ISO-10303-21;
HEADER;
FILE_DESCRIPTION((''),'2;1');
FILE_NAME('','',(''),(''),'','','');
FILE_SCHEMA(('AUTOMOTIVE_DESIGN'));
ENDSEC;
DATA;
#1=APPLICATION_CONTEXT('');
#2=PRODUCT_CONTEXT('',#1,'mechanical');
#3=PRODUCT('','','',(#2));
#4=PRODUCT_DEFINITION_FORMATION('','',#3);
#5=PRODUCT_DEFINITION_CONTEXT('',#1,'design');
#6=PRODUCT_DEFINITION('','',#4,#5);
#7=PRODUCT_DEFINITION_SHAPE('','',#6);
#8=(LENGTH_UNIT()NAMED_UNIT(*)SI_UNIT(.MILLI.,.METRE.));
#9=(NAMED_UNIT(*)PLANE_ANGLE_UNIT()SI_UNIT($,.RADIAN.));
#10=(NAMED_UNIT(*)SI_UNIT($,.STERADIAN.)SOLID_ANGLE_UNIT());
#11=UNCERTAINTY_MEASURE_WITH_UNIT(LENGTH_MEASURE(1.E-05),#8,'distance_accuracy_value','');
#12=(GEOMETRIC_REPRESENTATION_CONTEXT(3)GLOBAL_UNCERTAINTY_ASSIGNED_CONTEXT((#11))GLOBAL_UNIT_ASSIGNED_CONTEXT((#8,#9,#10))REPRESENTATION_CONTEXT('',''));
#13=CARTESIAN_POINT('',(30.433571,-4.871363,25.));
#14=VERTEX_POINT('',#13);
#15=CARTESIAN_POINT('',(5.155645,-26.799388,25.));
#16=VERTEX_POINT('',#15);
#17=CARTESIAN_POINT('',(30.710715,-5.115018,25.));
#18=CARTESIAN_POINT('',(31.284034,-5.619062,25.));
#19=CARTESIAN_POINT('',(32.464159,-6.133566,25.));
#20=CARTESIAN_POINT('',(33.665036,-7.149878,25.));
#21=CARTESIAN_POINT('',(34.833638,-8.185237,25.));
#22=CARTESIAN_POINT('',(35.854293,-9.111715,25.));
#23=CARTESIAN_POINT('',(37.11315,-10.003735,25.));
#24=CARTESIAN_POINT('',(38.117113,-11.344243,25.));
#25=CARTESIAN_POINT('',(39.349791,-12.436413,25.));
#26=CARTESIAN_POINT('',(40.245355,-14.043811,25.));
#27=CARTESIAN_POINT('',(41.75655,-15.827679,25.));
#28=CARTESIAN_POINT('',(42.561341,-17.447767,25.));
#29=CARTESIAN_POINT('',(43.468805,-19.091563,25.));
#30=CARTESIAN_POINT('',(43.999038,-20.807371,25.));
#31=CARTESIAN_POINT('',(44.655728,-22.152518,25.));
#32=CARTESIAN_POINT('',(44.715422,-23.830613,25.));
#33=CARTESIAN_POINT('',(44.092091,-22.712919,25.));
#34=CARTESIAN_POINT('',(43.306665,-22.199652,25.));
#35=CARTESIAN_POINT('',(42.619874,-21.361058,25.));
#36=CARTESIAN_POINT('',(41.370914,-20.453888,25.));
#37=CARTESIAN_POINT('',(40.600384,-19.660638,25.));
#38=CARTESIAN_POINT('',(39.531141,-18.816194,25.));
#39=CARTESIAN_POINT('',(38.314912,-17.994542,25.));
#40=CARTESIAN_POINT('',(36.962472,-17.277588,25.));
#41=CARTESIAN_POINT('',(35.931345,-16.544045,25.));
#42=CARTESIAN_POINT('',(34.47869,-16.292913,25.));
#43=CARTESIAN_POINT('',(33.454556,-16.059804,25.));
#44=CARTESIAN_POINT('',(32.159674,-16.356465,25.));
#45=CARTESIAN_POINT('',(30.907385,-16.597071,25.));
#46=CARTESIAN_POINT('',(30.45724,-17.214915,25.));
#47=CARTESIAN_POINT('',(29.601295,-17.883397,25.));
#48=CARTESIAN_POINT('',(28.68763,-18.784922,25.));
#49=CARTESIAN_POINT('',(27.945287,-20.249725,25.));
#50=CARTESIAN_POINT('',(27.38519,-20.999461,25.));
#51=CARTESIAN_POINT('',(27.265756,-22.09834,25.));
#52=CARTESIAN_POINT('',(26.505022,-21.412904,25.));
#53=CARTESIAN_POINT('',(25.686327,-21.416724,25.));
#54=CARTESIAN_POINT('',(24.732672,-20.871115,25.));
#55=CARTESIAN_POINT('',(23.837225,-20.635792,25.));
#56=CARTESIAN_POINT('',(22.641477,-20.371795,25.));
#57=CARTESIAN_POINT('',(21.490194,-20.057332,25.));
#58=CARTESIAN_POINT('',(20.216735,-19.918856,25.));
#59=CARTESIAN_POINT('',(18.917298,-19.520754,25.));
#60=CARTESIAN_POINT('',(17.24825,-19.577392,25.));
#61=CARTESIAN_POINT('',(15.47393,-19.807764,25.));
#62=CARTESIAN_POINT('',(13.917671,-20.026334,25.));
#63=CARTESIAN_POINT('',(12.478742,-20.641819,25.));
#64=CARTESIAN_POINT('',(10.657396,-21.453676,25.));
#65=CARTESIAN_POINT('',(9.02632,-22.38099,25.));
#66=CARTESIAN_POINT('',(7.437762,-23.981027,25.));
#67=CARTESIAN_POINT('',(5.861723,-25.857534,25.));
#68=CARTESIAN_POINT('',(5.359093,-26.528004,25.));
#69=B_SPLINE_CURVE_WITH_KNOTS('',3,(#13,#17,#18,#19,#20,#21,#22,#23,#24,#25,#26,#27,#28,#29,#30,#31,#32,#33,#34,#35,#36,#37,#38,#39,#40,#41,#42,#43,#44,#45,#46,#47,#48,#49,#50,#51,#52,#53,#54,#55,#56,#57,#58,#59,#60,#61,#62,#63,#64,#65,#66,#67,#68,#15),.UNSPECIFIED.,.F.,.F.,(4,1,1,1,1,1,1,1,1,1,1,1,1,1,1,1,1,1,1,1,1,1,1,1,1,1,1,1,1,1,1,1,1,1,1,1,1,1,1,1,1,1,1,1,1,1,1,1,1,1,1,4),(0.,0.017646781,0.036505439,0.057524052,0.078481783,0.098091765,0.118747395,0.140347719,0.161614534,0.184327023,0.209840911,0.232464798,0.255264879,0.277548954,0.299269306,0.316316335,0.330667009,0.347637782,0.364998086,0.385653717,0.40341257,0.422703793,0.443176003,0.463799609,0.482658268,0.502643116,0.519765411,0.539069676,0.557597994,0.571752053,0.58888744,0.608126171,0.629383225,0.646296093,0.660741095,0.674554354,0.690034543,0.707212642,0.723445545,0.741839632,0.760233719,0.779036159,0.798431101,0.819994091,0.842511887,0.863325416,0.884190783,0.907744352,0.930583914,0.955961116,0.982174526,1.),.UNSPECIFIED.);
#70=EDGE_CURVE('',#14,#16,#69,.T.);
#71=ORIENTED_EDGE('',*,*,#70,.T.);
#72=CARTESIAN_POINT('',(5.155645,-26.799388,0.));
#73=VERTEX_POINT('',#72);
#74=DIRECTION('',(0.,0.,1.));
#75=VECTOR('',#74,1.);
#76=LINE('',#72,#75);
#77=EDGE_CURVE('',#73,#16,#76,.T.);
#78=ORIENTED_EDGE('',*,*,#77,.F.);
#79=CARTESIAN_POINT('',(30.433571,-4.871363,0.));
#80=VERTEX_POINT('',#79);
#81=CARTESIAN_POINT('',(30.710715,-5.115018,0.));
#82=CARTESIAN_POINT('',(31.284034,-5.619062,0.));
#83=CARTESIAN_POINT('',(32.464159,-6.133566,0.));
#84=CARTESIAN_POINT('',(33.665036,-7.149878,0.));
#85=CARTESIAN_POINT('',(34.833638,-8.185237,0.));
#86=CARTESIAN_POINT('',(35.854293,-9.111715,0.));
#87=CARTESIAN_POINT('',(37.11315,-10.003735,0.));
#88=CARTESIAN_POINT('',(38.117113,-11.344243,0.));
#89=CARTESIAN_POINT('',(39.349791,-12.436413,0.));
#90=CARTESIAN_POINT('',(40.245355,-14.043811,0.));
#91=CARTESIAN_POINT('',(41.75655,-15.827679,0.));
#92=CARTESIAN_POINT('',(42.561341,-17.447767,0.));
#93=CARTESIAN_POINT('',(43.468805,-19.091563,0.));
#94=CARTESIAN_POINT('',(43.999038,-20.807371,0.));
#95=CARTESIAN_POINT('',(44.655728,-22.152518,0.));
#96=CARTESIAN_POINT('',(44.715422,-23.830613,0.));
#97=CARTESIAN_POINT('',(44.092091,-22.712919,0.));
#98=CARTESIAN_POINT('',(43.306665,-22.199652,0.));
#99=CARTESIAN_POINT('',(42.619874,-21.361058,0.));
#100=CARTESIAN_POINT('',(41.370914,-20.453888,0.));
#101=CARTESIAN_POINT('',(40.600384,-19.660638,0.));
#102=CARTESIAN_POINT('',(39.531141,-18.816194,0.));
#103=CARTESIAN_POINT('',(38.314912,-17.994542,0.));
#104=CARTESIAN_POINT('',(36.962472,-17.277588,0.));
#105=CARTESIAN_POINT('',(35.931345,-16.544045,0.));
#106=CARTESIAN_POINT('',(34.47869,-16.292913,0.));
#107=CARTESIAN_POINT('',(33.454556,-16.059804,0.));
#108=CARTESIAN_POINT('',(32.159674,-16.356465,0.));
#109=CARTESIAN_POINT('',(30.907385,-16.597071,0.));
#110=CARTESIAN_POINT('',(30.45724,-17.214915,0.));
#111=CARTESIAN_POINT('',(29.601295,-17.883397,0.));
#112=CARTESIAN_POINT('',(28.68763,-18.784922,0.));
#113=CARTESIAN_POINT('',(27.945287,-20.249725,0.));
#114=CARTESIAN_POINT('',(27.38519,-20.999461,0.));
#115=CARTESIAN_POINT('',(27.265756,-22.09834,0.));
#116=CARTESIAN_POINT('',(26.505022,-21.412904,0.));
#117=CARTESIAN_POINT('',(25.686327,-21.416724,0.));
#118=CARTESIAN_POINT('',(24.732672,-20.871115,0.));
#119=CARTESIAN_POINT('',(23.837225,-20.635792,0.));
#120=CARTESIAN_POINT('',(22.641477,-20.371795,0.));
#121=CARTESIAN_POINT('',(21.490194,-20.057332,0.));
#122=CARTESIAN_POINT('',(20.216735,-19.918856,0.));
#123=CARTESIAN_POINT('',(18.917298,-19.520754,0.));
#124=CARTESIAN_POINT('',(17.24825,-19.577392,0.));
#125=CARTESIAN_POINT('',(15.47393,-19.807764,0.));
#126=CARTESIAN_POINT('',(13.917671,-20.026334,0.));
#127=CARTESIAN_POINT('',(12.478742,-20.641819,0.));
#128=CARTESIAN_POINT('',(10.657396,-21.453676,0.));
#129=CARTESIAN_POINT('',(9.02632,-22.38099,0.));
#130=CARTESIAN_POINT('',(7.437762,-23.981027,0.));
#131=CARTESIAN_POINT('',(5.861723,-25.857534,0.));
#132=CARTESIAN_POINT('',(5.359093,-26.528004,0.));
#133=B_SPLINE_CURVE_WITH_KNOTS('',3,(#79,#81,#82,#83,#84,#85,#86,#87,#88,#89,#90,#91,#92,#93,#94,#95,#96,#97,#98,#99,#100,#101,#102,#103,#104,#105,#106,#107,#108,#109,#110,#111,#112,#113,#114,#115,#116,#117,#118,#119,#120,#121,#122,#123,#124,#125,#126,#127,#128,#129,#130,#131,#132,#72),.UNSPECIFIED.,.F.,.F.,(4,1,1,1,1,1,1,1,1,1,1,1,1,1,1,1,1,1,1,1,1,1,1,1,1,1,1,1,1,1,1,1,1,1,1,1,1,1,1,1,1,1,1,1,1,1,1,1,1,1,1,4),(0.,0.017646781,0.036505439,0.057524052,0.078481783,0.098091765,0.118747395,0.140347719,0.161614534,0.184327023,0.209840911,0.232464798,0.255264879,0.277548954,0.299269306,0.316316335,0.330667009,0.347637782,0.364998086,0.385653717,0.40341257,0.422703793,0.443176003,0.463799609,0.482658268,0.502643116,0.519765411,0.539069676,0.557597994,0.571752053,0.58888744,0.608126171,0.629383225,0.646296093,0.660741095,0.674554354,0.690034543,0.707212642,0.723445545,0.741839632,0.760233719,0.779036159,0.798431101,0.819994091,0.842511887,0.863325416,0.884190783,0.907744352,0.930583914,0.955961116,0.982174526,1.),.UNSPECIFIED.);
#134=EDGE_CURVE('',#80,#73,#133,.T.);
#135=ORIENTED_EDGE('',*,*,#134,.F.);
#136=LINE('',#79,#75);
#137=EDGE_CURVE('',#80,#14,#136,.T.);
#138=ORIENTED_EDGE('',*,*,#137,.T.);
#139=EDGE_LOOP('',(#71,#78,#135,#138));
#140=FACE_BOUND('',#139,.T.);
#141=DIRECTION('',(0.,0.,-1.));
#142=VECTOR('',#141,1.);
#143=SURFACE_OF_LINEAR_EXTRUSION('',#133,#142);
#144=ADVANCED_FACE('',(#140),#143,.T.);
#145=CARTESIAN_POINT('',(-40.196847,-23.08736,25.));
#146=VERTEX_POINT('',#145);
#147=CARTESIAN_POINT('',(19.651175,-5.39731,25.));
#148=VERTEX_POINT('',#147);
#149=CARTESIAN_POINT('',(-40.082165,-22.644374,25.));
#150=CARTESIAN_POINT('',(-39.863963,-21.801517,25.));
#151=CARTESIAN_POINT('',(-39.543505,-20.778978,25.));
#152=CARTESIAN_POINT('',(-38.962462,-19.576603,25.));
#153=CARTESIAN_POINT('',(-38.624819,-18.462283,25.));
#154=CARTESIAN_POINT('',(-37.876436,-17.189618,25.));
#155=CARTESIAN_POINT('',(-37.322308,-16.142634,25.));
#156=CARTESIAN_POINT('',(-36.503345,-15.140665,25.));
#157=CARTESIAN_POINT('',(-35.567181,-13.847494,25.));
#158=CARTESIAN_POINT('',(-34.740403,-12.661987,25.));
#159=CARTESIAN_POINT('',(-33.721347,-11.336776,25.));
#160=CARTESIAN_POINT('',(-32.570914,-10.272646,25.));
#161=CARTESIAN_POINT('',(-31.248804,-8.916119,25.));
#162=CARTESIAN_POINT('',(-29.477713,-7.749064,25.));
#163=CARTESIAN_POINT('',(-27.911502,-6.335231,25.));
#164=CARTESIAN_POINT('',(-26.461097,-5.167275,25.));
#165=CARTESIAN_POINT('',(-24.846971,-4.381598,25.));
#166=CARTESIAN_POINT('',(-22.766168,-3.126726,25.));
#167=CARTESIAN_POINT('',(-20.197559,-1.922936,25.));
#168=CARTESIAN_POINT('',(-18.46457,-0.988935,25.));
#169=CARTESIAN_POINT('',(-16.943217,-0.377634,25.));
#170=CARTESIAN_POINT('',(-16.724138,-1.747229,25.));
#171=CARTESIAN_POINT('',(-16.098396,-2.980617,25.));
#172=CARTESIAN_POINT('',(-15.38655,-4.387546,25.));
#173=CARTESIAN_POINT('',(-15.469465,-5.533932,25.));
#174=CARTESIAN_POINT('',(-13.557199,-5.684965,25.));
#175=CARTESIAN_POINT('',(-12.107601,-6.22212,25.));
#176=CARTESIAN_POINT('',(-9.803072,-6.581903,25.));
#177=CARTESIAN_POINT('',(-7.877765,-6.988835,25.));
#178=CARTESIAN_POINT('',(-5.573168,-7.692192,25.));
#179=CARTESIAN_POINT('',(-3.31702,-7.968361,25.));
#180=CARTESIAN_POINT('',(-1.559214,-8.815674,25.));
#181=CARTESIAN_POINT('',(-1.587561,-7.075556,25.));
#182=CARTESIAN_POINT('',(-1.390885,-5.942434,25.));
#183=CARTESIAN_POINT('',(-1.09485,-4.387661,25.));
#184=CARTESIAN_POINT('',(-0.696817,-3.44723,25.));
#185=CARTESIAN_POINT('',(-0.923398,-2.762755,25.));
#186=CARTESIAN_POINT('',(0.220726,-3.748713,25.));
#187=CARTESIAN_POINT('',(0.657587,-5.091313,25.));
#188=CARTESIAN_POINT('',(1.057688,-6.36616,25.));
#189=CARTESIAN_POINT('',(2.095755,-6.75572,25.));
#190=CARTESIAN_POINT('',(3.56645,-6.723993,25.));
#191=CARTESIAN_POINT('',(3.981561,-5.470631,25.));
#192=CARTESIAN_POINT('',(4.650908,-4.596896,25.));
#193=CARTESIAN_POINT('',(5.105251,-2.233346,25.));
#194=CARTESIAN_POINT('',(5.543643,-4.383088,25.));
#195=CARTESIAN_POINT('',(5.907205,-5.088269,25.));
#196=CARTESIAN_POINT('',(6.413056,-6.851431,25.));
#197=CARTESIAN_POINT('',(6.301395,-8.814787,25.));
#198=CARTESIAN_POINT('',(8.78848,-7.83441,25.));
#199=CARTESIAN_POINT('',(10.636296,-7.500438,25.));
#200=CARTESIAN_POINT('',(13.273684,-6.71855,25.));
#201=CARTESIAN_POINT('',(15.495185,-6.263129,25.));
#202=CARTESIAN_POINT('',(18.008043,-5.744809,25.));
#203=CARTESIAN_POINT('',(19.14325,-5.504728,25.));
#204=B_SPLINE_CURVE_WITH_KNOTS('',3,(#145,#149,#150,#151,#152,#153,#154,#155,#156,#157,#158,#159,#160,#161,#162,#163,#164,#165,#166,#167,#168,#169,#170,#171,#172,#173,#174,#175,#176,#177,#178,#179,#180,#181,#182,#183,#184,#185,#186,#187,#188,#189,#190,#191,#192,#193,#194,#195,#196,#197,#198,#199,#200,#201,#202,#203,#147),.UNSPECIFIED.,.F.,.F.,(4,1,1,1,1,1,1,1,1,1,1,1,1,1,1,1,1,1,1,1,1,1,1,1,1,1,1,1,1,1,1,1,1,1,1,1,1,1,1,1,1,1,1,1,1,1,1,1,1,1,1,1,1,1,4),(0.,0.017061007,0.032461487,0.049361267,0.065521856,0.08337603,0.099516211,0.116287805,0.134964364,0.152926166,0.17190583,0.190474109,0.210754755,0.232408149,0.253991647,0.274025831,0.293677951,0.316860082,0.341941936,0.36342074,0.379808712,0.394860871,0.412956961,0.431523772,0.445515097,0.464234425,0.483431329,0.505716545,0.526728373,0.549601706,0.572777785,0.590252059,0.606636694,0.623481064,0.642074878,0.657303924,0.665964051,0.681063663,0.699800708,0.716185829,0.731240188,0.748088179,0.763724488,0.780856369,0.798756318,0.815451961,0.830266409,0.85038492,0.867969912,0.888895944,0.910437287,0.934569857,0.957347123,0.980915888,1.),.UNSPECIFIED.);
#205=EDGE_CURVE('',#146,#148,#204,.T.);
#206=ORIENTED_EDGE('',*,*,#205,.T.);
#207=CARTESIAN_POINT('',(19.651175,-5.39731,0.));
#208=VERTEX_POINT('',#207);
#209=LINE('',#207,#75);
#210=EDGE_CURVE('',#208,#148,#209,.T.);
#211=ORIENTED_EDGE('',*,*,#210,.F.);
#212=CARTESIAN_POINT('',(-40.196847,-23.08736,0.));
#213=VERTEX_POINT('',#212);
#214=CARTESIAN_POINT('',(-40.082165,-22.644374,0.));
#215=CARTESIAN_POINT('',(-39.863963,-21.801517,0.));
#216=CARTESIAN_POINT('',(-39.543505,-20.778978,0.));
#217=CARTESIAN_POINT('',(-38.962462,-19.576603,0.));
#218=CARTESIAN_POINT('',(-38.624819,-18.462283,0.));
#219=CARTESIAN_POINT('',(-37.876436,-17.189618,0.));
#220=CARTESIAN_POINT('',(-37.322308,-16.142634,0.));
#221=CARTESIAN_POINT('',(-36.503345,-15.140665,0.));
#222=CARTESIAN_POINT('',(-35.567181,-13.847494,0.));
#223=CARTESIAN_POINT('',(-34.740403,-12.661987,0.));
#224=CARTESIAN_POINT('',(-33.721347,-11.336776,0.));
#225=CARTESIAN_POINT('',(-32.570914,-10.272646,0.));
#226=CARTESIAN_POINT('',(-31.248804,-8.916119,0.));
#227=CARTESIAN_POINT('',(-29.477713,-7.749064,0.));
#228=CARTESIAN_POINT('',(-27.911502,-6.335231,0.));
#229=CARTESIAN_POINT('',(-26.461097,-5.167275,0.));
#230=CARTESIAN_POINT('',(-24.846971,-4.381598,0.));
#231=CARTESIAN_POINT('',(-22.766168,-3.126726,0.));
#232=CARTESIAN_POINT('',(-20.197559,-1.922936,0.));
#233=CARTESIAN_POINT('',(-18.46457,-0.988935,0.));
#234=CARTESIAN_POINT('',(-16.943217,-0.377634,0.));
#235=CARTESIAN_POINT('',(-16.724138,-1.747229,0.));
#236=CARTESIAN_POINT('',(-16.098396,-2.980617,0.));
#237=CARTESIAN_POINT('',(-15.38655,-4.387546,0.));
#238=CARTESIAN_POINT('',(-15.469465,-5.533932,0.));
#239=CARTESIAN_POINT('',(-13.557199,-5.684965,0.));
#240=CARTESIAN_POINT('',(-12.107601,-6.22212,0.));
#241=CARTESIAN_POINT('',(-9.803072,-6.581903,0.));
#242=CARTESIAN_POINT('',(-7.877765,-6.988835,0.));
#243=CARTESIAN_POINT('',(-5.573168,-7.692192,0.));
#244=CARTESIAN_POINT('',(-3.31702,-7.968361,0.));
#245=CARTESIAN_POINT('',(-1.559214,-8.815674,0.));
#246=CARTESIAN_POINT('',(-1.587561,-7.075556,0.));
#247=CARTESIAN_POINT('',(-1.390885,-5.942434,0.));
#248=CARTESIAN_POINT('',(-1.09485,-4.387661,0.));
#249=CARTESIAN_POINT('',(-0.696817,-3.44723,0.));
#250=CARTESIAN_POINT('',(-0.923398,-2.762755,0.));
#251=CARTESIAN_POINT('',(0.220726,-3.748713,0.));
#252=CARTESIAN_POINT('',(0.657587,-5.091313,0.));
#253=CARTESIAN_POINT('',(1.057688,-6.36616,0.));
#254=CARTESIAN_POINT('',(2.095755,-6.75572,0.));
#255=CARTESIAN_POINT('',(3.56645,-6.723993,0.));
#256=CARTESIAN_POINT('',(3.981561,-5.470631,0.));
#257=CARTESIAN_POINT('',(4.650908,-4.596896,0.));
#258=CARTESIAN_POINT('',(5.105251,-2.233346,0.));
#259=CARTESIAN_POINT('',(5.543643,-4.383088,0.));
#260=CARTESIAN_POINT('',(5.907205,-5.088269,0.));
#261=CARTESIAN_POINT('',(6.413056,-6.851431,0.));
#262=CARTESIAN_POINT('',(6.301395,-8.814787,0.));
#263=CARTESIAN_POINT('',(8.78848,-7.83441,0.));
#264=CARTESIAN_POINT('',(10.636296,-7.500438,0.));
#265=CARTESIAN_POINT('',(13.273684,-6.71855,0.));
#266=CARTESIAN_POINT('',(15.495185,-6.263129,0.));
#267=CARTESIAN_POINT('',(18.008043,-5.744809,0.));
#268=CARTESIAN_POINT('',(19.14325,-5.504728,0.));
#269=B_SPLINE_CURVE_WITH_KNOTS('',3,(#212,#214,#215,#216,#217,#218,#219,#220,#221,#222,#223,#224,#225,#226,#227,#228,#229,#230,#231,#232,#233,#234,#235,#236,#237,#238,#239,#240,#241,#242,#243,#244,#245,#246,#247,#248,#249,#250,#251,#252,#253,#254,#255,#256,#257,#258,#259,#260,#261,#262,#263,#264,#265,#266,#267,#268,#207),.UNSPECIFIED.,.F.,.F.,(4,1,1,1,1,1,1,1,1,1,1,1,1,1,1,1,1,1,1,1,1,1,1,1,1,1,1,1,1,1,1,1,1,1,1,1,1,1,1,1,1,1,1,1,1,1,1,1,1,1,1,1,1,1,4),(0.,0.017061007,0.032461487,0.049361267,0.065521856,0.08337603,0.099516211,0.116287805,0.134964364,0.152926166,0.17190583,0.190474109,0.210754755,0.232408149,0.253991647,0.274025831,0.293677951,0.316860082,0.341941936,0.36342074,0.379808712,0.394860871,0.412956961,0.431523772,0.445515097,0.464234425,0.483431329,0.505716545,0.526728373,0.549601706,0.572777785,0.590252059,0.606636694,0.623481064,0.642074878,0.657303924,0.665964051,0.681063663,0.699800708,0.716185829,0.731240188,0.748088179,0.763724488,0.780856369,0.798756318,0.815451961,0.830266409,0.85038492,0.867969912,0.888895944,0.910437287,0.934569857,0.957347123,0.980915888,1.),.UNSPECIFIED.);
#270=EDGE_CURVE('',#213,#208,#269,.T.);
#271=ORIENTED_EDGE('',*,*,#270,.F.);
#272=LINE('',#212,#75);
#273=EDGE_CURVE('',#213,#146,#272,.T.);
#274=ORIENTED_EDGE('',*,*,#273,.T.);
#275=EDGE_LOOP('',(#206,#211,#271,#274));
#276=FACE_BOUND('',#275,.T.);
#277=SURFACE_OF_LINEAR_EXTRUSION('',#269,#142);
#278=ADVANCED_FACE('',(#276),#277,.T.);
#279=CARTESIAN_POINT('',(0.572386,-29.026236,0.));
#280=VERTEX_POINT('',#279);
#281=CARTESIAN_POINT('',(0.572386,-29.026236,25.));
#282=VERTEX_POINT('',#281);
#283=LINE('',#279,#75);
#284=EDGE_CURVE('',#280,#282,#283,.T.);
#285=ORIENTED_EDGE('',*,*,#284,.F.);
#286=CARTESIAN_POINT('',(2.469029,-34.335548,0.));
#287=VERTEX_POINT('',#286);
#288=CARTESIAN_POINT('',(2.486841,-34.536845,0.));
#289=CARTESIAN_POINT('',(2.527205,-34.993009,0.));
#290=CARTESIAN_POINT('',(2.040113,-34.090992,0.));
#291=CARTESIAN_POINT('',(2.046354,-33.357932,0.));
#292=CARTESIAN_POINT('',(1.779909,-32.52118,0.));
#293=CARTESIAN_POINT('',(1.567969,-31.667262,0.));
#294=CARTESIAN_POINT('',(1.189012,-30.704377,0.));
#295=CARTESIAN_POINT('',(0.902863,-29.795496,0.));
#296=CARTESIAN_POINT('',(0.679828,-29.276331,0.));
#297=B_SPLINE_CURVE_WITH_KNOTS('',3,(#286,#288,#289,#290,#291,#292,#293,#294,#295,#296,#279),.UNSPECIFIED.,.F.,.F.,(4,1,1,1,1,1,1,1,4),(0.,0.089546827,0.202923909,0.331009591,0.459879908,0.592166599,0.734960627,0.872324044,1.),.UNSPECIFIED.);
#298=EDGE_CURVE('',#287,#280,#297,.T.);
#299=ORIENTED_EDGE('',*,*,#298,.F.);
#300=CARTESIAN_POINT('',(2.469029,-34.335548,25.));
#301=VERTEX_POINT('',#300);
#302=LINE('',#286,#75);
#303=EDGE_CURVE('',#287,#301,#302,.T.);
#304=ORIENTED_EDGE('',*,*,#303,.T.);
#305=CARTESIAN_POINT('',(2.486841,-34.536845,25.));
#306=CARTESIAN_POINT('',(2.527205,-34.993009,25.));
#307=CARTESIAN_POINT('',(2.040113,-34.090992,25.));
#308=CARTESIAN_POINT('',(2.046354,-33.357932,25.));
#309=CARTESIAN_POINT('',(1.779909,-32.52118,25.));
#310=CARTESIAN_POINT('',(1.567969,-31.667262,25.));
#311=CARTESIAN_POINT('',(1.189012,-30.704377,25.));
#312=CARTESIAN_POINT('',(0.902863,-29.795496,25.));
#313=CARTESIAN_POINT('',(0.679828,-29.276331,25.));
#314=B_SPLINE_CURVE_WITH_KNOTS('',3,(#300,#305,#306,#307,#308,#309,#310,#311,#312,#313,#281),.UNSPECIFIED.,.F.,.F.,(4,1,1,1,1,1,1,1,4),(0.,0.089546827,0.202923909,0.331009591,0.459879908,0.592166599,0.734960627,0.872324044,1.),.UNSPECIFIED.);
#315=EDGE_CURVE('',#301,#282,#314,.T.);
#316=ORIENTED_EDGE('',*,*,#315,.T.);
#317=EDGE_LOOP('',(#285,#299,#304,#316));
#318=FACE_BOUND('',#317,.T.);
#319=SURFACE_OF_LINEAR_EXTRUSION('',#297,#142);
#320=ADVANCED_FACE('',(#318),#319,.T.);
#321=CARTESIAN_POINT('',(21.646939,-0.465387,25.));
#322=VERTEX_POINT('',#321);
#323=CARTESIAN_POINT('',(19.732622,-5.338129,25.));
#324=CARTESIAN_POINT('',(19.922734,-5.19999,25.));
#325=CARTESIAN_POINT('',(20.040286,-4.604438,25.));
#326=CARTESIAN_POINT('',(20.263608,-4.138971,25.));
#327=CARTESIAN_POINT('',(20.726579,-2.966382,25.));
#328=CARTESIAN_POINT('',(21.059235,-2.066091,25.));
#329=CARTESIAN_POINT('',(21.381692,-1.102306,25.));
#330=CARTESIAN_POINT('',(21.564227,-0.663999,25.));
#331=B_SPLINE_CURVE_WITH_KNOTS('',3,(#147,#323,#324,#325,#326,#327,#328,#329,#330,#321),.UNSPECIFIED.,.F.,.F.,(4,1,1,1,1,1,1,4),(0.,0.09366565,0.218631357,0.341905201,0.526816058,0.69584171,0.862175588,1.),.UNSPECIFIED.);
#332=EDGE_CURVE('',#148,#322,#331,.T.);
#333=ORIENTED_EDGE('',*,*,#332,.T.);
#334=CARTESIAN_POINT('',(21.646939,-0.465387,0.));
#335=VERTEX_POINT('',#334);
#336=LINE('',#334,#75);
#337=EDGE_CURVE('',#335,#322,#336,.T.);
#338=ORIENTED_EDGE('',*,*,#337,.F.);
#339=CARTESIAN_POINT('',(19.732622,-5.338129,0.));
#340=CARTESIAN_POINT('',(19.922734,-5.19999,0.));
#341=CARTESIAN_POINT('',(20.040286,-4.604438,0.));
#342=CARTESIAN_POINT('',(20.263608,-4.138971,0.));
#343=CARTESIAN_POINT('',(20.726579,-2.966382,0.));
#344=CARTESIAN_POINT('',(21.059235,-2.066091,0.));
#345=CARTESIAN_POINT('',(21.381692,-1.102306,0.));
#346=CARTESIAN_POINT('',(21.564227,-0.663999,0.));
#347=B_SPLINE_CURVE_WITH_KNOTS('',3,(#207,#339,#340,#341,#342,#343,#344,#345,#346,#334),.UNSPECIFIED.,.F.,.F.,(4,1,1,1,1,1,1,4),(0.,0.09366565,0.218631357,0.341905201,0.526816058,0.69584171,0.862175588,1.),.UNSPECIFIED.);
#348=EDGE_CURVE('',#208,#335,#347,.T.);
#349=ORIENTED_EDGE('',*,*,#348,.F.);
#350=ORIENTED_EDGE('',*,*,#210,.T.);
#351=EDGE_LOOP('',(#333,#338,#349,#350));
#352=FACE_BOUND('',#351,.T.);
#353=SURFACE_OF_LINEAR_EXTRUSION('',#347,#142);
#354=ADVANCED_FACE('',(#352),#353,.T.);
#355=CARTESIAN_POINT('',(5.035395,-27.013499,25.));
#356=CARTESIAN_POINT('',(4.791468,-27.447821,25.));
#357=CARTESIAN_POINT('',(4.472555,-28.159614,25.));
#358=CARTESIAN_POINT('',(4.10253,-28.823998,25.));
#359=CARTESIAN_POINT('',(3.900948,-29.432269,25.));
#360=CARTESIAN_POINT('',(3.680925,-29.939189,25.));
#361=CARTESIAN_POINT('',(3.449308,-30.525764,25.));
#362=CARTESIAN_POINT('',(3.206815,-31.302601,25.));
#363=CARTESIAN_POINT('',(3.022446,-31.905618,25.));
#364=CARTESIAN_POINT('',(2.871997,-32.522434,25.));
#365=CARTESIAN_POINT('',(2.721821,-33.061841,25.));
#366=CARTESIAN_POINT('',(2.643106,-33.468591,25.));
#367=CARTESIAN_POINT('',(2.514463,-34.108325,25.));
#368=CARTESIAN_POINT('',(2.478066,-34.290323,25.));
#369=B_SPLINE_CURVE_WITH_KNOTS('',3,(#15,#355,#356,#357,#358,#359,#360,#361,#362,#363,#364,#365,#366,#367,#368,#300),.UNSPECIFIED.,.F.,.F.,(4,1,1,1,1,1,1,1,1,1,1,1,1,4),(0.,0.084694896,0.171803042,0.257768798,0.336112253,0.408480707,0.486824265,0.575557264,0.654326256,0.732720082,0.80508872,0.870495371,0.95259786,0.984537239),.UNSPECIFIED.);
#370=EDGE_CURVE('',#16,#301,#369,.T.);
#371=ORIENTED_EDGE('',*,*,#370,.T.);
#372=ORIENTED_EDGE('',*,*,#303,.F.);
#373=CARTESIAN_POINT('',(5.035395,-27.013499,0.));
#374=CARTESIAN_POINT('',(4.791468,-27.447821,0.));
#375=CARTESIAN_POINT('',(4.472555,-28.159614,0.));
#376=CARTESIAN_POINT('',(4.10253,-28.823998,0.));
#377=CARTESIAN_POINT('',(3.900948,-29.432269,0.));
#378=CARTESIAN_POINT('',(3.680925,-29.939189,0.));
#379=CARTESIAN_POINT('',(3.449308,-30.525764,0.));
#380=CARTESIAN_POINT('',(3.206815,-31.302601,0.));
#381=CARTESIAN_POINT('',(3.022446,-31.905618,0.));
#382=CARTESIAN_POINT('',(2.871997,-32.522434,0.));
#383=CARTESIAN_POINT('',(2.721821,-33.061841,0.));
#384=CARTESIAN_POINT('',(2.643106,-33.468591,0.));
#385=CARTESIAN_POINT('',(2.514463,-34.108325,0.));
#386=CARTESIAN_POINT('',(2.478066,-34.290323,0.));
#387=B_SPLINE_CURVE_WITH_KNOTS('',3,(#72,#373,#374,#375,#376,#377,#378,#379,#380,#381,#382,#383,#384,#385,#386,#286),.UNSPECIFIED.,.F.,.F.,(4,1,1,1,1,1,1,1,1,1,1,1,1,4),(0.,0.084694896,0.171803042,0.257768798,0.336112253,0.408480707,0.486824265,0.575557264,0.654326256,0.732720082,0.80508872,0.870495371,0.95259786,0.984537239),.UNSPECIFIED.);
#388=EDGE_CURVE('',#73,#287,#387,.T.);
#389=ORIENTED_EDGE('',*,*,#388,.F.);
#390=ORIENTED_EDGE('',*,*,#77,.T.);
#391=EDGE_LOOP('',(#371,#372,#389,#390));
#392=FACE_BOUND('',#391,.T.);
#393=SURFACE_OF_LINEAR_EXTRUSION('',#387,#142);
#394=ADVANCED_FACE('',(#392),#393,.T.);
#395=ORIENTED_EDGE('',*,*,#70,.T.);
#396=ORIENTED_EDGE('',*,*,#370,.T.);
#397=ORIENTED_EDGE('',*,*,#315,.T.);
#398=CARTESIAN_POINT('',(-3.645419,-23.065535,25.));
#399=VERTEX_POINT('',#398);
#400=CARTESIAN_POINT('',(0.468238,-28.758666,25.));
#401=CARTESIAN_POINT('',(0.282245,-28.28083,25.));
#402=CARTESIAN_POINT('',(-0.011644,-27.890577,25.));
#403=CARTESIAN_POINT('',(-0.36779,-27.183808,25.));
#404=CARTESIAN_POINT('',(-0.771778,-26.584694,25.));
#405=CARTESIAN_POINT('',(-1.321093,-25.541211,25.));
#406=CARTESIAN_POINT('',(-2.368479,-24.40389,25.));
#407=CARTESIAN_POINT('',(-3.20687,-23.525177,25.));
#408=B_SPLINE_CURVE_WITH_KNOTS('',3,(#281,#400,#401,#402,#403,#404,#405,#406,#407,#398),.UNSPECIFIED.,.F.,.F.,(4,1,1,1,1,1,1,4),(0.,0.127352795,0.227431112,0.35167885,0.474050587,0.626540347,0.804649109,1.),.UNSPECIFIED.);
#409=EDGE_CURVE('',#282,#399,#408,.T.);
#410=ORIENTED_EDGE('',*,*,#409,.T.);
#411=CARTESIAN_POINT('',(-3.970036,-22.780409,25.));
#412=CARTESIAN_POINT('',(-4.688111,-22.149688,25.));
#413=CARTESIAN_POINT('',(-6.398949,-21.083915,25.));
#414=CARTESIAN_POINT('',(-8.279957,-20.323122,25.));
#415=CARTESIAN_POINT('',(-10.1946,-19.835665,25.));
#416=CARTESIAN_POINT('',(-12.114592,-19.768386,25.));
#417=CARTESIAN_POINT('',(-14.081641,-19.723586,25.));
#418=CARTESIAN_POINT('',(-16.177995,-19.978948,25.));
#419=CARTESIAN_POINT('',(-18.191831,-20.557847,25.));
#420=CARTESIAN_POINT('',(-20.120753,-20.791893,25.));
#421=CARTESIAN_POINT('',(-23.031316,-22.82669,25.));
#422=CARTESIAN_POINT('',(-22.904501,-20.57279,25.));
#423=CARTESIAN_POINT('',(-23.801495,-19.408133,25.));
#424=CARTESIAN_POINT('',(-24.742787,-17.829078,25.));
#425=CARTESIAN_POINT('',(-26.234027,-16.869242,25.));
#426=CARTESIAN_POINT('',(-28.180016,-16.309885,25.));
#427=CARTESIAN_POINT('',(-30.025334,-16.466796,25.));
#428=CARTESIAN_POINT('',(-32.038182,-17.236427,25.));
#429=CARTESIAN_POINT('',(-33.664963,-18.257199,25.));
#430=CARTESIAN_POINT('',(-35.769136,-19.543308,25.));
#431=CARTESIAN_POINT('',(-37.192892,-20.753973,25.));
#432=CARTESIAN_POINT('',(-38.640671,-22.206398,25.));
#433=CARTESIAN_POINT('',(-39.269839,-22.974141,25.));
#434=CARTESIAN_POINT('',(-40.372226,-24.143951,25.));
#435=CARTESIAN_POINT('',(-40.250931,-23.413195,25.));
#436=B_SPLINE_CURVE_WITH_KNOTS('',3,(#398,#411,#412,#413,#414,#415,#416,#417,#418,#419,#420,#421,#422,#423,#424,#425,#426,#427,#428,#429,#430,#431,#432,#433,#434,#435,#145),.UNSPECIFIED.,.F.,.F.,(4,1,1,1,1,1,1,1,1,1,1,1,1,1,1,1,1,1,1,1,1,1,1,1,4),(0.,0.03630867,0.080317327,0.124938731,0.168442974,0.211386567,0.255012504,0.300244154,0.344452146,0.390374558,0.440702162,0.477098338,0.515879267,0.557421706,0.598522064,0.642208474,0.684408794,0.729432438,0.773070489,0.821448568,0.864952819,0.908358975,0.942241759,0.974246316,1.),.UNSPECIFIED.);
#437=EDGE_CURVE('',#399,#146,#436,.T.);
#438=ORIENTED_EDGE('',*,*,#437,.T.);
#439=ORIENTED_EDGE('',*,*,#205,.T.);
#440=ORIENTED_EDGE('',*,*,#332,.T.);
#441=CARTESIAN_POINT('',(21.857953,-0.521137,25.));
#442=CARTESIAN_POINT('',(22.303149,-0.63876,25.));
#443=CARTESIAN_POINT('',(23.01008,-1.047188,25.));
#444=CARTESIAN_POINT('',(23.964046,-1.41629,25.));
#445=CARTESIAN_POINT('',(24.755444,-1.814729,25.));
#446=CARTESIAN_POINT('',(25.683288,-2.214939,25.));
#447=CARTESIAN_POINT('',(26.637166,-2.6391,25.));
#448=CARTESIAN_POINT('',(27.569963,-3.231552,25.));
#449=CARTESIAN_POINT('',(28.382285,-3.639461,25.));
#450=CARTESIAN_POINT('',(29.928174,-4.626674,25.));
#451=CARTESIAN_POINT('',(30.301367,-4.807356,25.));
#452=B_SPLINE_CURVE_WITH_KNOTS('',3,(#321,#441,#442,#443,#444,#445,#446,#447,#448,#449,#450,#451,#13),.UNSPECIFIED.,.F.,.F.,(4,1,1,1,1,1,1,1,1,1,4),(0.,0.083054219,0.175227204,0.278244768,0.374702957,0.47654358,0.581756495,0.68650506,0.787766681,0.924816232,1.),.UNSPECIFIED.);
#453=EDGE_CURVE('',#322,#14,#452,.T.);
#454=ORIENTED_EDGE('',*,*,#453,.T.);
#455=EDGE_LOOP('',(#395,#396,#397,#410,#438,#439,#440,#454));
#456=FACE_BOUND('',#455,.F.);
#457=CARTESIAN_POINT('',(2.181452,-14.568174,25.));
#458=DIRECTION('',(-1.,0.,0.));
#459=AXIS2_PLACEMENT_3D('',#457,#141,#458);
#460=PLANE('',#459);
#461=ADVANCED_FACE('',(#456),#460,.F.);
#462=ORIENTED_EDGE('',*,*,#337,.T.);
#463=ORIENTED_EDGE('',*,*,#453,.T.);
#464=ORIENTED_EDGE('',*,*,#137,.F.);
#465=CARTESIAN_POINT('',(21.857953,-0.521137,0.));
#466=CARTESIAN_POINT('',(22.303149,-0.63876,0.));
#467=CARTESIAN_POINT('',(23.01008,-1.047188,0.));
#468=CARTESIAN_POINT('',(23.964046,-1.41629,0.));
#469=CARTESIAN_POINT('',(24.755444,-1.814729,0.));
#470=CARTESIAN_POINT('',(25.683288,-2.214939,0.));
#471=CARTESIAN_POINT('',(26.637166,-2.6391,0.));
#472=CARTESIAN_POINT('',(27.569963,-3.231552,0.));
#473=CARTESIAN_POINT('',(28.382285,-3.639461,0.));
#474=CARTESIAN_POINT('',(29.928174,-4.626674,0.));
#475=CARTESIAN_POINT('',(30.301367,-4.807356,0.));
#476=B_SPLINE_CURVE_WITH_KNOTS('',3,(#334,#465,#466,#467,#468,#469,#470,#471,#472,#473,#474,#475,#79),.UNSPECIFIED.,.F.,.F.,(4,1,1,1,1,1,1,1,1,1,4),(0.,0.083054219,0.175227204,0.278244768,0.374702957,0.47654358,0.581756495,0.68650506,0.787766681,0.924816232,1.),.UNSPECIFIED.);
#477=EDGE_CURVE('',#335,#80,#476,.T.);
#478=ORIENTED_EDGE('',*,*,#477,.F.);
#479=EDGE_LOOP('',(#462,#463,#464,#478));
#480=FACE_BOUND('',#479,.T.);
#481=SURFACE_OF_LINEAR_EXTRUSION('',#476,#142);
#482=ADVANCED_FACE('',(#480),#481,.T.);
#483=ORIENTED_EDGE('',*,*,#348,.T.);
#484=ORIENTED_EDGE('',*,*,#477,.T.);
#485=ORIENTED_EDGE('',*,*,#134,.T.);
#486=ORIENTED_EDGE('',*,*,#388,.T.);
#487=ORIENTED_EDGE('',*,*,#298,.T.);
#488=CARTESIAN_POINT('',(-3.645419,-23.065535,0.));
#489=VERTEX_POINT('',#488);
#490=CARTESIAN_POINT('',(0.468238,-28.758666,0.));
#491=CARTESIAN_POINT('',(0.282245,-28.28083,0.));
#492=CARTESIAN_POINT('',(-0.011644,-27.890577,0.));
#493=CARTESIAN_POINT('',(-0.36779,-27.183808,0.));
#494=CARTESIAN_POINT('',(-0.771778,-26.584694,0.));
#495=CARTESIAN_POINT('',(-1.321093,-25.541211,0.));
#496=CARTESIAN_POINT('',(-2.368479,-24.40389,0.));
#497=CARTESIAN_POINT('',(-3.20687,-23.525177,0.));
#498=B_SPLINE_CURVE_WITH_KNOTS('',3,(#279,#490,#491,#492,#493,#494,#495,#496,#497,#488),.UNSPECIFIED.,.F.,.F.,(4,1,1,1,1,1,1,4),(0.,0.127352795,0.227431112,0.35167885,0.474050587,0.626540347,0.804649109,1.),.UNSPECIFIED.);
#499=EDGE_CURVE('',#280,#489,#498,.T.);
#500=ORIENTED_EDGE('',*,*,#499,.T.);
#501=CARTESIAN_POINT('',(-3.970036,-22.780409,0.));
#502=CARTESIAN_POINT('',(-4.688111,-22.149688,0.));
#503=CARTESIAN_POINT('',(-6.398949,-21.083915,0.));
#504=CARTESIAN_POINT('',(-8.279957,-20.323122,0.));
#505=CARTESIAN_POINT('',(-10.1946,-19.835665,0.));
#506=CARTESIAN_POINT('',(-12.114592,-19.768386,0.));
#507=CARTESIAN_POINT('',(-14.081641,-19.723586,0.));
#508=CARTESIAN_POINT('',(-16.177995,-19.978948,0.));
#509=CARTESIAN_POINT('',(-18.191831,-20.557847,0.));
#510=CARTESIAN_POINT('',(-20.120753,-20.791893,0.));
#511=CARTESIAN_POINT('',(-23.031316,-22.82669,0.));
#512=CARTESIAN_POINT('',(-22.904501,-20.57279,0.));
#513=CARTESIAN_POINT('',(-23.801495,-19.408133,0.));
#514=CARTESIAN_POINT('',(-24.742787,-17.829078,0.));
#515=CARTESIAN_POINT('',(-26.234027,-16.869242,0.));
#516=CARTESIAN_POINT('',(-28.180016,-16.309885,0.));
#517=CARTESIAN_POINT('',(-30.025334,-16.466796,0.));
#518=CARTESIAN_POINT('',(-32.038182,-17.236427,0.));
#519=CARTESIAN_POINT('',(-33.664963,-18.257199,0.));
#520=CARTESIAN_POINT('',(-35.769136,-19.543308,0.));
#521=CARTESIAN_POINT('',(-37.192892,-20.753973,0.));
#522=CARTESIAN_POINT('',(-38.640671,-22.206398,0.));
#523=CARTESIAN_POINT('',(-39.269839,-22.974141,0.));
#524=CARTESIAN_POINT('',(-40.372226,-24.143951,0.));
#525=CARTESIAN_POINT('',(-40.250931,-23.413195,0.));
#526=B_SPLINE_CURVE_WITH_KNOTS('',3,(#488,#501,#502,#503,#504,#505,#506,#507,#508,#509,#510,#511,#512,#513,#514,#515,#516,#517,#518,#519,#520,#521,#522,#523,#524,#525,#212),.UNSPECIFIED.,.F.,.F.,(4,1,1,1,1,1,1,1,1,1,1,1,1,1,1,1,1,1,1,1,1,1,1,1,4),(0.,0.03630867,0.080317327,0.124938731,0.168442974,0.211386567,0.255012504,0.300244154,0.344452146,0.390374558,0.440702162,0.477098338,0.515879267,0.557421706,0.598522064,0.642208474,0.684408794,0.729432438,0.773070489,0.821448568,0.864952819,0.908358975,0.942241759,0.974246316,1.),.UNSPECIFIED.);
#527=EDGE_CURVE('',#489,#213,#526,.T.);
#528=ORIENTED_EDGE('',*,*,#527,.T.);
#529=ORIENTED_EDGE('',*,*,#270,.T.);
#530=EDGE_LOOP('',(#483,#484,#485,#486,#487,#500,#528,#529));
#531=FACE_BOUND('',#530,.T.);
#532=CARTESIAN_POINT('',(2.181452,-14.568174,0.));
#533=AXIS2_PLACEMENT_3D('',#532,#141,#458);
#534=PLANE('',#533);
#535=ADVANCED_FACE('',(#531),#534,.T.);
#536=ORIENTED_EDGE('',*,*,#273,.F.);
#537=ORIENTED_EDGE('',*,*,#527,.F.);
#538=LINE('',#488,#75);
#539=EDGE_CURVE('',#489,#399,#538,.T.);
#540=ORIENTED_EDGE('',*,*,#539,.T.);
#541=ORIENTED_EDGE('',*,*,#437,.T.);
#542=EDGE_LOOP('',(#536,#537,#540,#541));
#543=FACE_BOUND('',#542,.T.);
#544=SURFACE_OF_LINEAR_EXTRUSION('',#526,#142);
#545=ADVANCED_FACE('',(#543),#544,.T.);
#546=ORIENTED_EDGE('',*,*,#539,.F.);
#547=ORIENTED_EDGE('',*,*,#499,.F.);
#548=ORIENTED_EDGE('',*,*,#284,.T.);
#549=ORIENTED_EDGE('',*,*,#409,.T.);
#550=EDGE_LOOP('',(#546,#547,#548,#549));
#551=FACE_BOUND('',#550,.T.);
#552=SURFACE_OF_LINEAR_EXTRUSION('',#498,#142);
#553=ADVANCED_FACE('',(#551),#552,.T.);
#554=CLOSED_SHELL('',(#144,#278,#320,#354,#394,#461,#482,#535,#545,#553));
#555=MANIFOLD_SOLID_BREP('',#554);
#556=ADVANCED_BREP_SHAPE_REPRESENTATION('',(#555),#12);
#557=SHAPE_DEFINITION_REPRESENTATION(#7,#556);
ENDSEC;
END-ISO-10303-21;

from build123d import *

# Parameters (mm, degrees)
F1_DEPTH = 25


# Not quite as in the source:
# - ends of sketch curves that miss each other by under 0.0002 mm in the source are joined


with BuildPart() as f1:
    # F0 (on Top) → F1 (new body)
    with BuildSketch(Plane.XY):
        with BuildLine():
            add(Edge.make_bspline(
                [(-40.1968471706, -23.0873599648), (-40.0821652579, -22.6443739225), (-39.8639632828, -21.8015171271), (-39.5435051275, -20.7789783314), (-38.9624616028, -19.5766025839), (-38.6248192553, -18.4622828305), (-37.8764356227, -17.1896178035), (-37.3223083399, -16.1426343346), (-36.5033448154, -15.1406645327), (-35.5671807336, -13.8474938719), (-34.7404028099, -12.6619867692), (-33.7213474012, -11.3367760015), (-32.5709136851, -10.2726462551), (-31.2488039384, -8.9161188537), (-29.477712685, -7.7490635161), (-27.9115017025, -6.3352311912), (-26.4610965168, -5.1672752357), (-24.8469714717, -4.3815980141), (-22.76616761, -3.1267258394), (-20.197558566, -1.922936453), (-18.4645703482, -0.9889353135), (-16.9432166525, -0.3776336266), (-16.7241377526, -1.7472285966), (-16.0983957866, -2.98061749), (-15.3865504555, -4.3875457176), (-15.4694646208, -5.5339323373), (-13.5571991944, -5.6849648844), (-12.1076010518, -6.2221198071), (-9.8030724141, -6.5819033007), (-7.8777646095, -6.9888346023), (-5.5731675689, -7.6921919678), (-3.3170197485, -7.9683608609), (-1.5592142712, -8.8156744244), (-1.5875609412, -7.0755561172), (-1.3908853453, -5.9424344394), (-1.0948496289, -4.3876609047), (-0.696817184, -3.4472296341), (-0.9233984107, -2.7627548299), (0.2207261996, -3.7487128755), (0.6575865872, -5.0913132804), (1.05768838, -6.3661599967), (2.0957548088, -6.7557202463), (3.5664498521, -6.7239926634), (3.9815612421, -5.4706314467), (4.6509078444, -4.5968960366), (5.105251181, -2.2333464779), (5.5436434557, -4.3830876586), (5.9072053976, -5.0882691082), (6.4130563138, -6.8514311697), (6.3013952004, -8.8147866429), (8.7884804661, -7.8344097925), (10.6362955306, -7.500438229), (13.2736835098, -6.718549896), (15.4951850723, -6.2631292249), (18.0080425407, -5.7448091068), (19.1432502742, -5.5047284656), (19.6511745453, -5.3973095492)],
                knots=[0, 0, 0, 0, 0.0170610068, 0.0324614868, 0.0493612671, 0.0655218559, 0.0833760304, 0.0995162111, 0.1162878049, 0.1349643643, 0.1529261659, 0.1719058297, 0.1904741087, 0.2107547548, 0.2324081495, 0.253991647, 0.2740258308, 0.2936779511, 0.3168600822, 0.3419419356, 0.3634207404, 0.3798087119, 0.3948608713, 0.4129569613, 0.4315237718, 0.4455150974, 0.4642344254, 0.4834313288, 0.5057165451, 0.526728373, 0.549601706, 0.5727777848, 0.5902520588, 0.606636694, 0.6234810643, 0.6420748776, 0.6573039245, 0.6659640514, 0.6810636629, 0.6998007085, 0.7161858288, 0.7312401883, 0.748088179, 0.7637244879, 0.7808563694, 0.7987563178, 0.8154519605, 0.8302664091, 0.8503849202, 0.8679699115, 0.8888959441, 0.9104372868, 0.9345698574, 0.9573471235, 0.9809158883, 1, 1, 1, 1], degree=3))
            add(Edge.make_bspline(
                [(-3.6454189103, -23.0655353516), (-3.9700357905, -22.7804086809), (-4.688111127, -22.1496884611), (-6.3989491613, -21.0839150655), (-8.2799567849, -20.3231216792), (-10.1946000306, -19.8356650727), (-12.1145921887, -19.7683859316), (-14.0816405812, -19.7235863275), (-16.1779945431, -19.9789483234), (-18.1918308983, -20.5578474853), (-20.1207526826, -20.7918932665), (-23.0313163117, -22.8266895653), (-22.9045006793, -20.5727904096), (-23.8014948384, -19.4081332415), (-24.7427870508, -17.8290780293), (-26.234027042, -16.8692420735), (-28.1800156141, -16.3098850154), (-30.0253338558, -16.466795709), (-32.0381815128, -17.2364274948), (-33.6649628124, -18.2571987271), (-35.7691363818, -19.5433076538), (-37.192892414, -20.7539734971), (-38.6406714979, -22.2063984812), (-39.2698386612, -22.9741411763), (-40.3722264802, -24.143950946), (-40.2509312224, -23.4131949876), (-40.1968471706, -23.0873599648)],
                knots=[0, 0, 0, 0, 0.0363086698, 0.0803173275, 0.1249387314, 0.1684429741, 0.2113865674, 0.2550125042, 0.3002441538, 0.3444521462, 0.3903745582, 0.440702162, 0.4770983378, 0.515879267, 0.5574217063, 0.5985220635, 0.6422084742, 0.684408794, 0.7294324381, 0.773070489, 0.8214485683, 0.864952819, 0.9083589752, 0.9422417588, 0.9742463163, 1, 1, 1, 1], degree=3))
            add(Edge.make_bspline(
                [(0.5723864888, -29.0262363851), (0.4682378359, -28.7586663924), (0.2822454991, -28.280830464), (-0.0116444167, -27.8905766618), (-0.3677904467, -27.1838078721), (-0.7717775214, -26.5846935372), (-1.3210933045, -25.5412114338), (-2.3684793038, -24.4038900115), (-3.2068699188, -23.5251765777), (-3.6454189103, -23.0655353516)],
                knots=[0, 0, 0, 0, 0.1273527951, 0.2274311123, 0.3516788503, 0.4740505874, 0.6265403472, 0.8046491085, 1, 1, 1, 1], degree=3))
            add(Edge.make_bspline(
                [(2.4690291857, -34.3355481578), (2.4868411073, -34.5368452574), (2.52720507, -34.9930087618), (2.0401125993, -34.0909924777), (2.0463543441, -33.3579315615), (1.7799086579, -32.5211803088), (1.567968678, -31.6672622635), (1.1890119666, -30.7043768415), (0.9028633326, -29.7954955647), (0.6798280471, -29.2763307762), (0.5723864888, -29.0262363851)],
                knots=[0, 0, 0, 0, 0.0895468266, 0.2029239087, 0.331009591, 0.4598799076, 0.592166599, 0.7349606271, 0.8723240442, 1, 1, 1, 1], degree=3))
            add(Edge.make_bspline(
                [(5.1556448452, -26.7993882298), (5.0353945307, -27.0134990148), (4.7914675536, -27.4478213431), (4.4725552741, -28.1596144069), (4.1025298063, -28.823997989), (3.9009480623, -29.4322693079), (3.6809253051, -29.9391885154), (3.4493076689, -30.5257635178), (3.2068145088, -31.3026010991), (3.0224463474, -31.9056179295), (2.8719974676, -32.522433859), (2.7218207152, -33.061841374), (2.6431061637, -33.4685907164), (2.5144634178, -34.1083247268), (2.4780655945, -34.2903228506), (2.4690291857, -34.3355481578)],
                knots=[0, 0, 0, 0, 0.0846948955, 0.1718030421, 0.2577687976, 0.3361122532, 0.4084807072, 0.486824265, 0.5755572637, 0.6543262562, 0.7327200822, 0.8050887195, 0.8704953712, 0.9525978604, 0.9845372386, 0.9845372386, 0.9845372386, 0.9845372386], degree=3))
            add(Edge.make_bspline(
                [(30.4335709661, -4.8713628203), (30.7107146067, -5.1150183022), (31.284034491, -5.6190620984), (32.4641591981, -6.133565822), (33.6650360911, -7.1498779185), (34.8336375284, -8.1852374152), (35.8542930312, -9.1117153158), (37.1131496437, -10.0037353672), (38.1171132809, -11.344242795), (39.3497914289, -12.4364125598), (40.2453545191, -14.0438105296), (41.7565501877, -15.8276788154), (42.5613405142, -17.4477672213), (43.4688048285, -19.0915626473), (43.9990375547, -20.8073713207), (44.6557284, -22.1525183208), (44.7154224009, -23.8306131029), (44.0920911693, -22.7129185747), (43.3066654105, -22.199651566), (42.6198743859, -21.3610579976), (41.3709144463, -20.4538875113), (40.6003837602, -19.6606375305), (39.5311411521, -18.8161944963), (38.3149121196, -17.9945420755), (36.9624715916, -17.2775877098), (35.9313452806, -16.5440446386), (34.478689866, -16.2929132669), (33.4545560154, -16.0598035569), (32.1596741001, -16.3564652317), (30.9073852743, -16.5970708586), (30.4572399618, -17.2149150379), (29.6012949555, -17.8833968703), (28.6876304241, -18.7849216976), (27.9452867803, -20.2497254903), (27.3851896879, -20.9994607354), (27.2657563672, -22.0983396605), (26.5050215865, -21.4129035781), (25.6863266722, -21.4167237107), (24.7326719559, -20.8711149716), (23.837225, -20.6357916093), (22.6414772635, -20.3717949694), (21.4901935981, -20.0573315634), (20.2167346659, -19.9188557401), (18.9172982176, -19.5207541036), (17.2482501029, -19.5773916779), (15.4739299687, -19.8077644565), (13.9176711013, -20.0263342828), (12.4787419381, -20.6418192455), (10.6573964904, -21.4536764033), (9.026320295, -22.3809902828), (7.4377623347, -23.9810269902), (5.8617231519, -25.8575340842), (5.3590928518, -26.5280042394), (5.1556448452, -26.7993882298)],
                knots=[0, 0, 0, 0, 0.0176467809, 0.0365054394, 0.0575240525, 0.0784817826, 0.0980917649, 0.1187473953, 0.1403477195, 0.1616145338, 0.1843270232, 0.2098409107, 0.2324647985, 0.2552648794, 0.2775489539, 0.2992693062, 0.3163163351, 0.3306670087, 0.347637782, 0.3649980864, 0.3856537168, 0.4034125698, 0.4227037934, 0.4431760026, 0.4637996093, 0.4826582678, 0.5026431159, 0.5197654106, 0.539069676, 0.5575979936, 0.571752053, 0.58888744, 0.6081261706, 0.6293832251, 0.646296093, 0.660741095, 0.6745543541, 0.6900345426, 0.7072126418, 0.7234455447, 0.7418396318, 0.7602337189, 0.7790361593, 0.798431101, 0.819994091, 0.8425118866, 0.8633254161, 0.8841907829, 0.9077443523, 0.9305839137, 0.9559611161, 0.9821745264, 1, 1, 1, 1], degree=3))
            add(Edge.make_bspline(
                [(21.646939218, -0.4653866636), (21.8579533435, -0.5211374089), (22.3031494521, -0.6387599369), (23.0100796409, -1.04718797), (23.9640461844, -1.4162903333), (24.7554440955, -1.8147290906), (25.6832878281, -2.2149391819), (26.6371658613, -2.6391001705), (27.5699629481, -3.2315523697), (28.3822846288, -3.6394607094), (29.928174179, -4.6266741672), (30.3013671526, -4.8073561351), (30.4335709661, -4.8713628203)],
                knots=[0, 0, 0, 0, 0.0830542194, 0.1752272044, 0.2782447684, 0.3747029573, 0.4765435803, 0.5817564955, 0.6865050602, 0.787766681, 0.9248162316, 1, 1, 1, 1], degree=3))
            add(Edge.make_bspline(
                [(19.6511745453, -5.3973095492), (19.7326220313, -5.3381285215), (19.9227341418, -5.1999900642), (20.0402859922, -4.6044381365), (20.2636083703, -4.1389711306), (20.7265788768, -2.9663823761), (21.0592352836, -2.0660907768), (21.3816918606, -1.1023058118), (21.5642265667, -0.663998525), (21.646939218, -0.4653866636)],
                knots=[0, 0, 0, 0, 0.09366565, 0.2186313573, 0.3419052005, 0.5268160582, 0.6958417099, 0.8621755878, 1, 1, 1, 1], degree=3))
        make_face()
    extrude(amount=F1_DEPTH)


solid = f1.part
